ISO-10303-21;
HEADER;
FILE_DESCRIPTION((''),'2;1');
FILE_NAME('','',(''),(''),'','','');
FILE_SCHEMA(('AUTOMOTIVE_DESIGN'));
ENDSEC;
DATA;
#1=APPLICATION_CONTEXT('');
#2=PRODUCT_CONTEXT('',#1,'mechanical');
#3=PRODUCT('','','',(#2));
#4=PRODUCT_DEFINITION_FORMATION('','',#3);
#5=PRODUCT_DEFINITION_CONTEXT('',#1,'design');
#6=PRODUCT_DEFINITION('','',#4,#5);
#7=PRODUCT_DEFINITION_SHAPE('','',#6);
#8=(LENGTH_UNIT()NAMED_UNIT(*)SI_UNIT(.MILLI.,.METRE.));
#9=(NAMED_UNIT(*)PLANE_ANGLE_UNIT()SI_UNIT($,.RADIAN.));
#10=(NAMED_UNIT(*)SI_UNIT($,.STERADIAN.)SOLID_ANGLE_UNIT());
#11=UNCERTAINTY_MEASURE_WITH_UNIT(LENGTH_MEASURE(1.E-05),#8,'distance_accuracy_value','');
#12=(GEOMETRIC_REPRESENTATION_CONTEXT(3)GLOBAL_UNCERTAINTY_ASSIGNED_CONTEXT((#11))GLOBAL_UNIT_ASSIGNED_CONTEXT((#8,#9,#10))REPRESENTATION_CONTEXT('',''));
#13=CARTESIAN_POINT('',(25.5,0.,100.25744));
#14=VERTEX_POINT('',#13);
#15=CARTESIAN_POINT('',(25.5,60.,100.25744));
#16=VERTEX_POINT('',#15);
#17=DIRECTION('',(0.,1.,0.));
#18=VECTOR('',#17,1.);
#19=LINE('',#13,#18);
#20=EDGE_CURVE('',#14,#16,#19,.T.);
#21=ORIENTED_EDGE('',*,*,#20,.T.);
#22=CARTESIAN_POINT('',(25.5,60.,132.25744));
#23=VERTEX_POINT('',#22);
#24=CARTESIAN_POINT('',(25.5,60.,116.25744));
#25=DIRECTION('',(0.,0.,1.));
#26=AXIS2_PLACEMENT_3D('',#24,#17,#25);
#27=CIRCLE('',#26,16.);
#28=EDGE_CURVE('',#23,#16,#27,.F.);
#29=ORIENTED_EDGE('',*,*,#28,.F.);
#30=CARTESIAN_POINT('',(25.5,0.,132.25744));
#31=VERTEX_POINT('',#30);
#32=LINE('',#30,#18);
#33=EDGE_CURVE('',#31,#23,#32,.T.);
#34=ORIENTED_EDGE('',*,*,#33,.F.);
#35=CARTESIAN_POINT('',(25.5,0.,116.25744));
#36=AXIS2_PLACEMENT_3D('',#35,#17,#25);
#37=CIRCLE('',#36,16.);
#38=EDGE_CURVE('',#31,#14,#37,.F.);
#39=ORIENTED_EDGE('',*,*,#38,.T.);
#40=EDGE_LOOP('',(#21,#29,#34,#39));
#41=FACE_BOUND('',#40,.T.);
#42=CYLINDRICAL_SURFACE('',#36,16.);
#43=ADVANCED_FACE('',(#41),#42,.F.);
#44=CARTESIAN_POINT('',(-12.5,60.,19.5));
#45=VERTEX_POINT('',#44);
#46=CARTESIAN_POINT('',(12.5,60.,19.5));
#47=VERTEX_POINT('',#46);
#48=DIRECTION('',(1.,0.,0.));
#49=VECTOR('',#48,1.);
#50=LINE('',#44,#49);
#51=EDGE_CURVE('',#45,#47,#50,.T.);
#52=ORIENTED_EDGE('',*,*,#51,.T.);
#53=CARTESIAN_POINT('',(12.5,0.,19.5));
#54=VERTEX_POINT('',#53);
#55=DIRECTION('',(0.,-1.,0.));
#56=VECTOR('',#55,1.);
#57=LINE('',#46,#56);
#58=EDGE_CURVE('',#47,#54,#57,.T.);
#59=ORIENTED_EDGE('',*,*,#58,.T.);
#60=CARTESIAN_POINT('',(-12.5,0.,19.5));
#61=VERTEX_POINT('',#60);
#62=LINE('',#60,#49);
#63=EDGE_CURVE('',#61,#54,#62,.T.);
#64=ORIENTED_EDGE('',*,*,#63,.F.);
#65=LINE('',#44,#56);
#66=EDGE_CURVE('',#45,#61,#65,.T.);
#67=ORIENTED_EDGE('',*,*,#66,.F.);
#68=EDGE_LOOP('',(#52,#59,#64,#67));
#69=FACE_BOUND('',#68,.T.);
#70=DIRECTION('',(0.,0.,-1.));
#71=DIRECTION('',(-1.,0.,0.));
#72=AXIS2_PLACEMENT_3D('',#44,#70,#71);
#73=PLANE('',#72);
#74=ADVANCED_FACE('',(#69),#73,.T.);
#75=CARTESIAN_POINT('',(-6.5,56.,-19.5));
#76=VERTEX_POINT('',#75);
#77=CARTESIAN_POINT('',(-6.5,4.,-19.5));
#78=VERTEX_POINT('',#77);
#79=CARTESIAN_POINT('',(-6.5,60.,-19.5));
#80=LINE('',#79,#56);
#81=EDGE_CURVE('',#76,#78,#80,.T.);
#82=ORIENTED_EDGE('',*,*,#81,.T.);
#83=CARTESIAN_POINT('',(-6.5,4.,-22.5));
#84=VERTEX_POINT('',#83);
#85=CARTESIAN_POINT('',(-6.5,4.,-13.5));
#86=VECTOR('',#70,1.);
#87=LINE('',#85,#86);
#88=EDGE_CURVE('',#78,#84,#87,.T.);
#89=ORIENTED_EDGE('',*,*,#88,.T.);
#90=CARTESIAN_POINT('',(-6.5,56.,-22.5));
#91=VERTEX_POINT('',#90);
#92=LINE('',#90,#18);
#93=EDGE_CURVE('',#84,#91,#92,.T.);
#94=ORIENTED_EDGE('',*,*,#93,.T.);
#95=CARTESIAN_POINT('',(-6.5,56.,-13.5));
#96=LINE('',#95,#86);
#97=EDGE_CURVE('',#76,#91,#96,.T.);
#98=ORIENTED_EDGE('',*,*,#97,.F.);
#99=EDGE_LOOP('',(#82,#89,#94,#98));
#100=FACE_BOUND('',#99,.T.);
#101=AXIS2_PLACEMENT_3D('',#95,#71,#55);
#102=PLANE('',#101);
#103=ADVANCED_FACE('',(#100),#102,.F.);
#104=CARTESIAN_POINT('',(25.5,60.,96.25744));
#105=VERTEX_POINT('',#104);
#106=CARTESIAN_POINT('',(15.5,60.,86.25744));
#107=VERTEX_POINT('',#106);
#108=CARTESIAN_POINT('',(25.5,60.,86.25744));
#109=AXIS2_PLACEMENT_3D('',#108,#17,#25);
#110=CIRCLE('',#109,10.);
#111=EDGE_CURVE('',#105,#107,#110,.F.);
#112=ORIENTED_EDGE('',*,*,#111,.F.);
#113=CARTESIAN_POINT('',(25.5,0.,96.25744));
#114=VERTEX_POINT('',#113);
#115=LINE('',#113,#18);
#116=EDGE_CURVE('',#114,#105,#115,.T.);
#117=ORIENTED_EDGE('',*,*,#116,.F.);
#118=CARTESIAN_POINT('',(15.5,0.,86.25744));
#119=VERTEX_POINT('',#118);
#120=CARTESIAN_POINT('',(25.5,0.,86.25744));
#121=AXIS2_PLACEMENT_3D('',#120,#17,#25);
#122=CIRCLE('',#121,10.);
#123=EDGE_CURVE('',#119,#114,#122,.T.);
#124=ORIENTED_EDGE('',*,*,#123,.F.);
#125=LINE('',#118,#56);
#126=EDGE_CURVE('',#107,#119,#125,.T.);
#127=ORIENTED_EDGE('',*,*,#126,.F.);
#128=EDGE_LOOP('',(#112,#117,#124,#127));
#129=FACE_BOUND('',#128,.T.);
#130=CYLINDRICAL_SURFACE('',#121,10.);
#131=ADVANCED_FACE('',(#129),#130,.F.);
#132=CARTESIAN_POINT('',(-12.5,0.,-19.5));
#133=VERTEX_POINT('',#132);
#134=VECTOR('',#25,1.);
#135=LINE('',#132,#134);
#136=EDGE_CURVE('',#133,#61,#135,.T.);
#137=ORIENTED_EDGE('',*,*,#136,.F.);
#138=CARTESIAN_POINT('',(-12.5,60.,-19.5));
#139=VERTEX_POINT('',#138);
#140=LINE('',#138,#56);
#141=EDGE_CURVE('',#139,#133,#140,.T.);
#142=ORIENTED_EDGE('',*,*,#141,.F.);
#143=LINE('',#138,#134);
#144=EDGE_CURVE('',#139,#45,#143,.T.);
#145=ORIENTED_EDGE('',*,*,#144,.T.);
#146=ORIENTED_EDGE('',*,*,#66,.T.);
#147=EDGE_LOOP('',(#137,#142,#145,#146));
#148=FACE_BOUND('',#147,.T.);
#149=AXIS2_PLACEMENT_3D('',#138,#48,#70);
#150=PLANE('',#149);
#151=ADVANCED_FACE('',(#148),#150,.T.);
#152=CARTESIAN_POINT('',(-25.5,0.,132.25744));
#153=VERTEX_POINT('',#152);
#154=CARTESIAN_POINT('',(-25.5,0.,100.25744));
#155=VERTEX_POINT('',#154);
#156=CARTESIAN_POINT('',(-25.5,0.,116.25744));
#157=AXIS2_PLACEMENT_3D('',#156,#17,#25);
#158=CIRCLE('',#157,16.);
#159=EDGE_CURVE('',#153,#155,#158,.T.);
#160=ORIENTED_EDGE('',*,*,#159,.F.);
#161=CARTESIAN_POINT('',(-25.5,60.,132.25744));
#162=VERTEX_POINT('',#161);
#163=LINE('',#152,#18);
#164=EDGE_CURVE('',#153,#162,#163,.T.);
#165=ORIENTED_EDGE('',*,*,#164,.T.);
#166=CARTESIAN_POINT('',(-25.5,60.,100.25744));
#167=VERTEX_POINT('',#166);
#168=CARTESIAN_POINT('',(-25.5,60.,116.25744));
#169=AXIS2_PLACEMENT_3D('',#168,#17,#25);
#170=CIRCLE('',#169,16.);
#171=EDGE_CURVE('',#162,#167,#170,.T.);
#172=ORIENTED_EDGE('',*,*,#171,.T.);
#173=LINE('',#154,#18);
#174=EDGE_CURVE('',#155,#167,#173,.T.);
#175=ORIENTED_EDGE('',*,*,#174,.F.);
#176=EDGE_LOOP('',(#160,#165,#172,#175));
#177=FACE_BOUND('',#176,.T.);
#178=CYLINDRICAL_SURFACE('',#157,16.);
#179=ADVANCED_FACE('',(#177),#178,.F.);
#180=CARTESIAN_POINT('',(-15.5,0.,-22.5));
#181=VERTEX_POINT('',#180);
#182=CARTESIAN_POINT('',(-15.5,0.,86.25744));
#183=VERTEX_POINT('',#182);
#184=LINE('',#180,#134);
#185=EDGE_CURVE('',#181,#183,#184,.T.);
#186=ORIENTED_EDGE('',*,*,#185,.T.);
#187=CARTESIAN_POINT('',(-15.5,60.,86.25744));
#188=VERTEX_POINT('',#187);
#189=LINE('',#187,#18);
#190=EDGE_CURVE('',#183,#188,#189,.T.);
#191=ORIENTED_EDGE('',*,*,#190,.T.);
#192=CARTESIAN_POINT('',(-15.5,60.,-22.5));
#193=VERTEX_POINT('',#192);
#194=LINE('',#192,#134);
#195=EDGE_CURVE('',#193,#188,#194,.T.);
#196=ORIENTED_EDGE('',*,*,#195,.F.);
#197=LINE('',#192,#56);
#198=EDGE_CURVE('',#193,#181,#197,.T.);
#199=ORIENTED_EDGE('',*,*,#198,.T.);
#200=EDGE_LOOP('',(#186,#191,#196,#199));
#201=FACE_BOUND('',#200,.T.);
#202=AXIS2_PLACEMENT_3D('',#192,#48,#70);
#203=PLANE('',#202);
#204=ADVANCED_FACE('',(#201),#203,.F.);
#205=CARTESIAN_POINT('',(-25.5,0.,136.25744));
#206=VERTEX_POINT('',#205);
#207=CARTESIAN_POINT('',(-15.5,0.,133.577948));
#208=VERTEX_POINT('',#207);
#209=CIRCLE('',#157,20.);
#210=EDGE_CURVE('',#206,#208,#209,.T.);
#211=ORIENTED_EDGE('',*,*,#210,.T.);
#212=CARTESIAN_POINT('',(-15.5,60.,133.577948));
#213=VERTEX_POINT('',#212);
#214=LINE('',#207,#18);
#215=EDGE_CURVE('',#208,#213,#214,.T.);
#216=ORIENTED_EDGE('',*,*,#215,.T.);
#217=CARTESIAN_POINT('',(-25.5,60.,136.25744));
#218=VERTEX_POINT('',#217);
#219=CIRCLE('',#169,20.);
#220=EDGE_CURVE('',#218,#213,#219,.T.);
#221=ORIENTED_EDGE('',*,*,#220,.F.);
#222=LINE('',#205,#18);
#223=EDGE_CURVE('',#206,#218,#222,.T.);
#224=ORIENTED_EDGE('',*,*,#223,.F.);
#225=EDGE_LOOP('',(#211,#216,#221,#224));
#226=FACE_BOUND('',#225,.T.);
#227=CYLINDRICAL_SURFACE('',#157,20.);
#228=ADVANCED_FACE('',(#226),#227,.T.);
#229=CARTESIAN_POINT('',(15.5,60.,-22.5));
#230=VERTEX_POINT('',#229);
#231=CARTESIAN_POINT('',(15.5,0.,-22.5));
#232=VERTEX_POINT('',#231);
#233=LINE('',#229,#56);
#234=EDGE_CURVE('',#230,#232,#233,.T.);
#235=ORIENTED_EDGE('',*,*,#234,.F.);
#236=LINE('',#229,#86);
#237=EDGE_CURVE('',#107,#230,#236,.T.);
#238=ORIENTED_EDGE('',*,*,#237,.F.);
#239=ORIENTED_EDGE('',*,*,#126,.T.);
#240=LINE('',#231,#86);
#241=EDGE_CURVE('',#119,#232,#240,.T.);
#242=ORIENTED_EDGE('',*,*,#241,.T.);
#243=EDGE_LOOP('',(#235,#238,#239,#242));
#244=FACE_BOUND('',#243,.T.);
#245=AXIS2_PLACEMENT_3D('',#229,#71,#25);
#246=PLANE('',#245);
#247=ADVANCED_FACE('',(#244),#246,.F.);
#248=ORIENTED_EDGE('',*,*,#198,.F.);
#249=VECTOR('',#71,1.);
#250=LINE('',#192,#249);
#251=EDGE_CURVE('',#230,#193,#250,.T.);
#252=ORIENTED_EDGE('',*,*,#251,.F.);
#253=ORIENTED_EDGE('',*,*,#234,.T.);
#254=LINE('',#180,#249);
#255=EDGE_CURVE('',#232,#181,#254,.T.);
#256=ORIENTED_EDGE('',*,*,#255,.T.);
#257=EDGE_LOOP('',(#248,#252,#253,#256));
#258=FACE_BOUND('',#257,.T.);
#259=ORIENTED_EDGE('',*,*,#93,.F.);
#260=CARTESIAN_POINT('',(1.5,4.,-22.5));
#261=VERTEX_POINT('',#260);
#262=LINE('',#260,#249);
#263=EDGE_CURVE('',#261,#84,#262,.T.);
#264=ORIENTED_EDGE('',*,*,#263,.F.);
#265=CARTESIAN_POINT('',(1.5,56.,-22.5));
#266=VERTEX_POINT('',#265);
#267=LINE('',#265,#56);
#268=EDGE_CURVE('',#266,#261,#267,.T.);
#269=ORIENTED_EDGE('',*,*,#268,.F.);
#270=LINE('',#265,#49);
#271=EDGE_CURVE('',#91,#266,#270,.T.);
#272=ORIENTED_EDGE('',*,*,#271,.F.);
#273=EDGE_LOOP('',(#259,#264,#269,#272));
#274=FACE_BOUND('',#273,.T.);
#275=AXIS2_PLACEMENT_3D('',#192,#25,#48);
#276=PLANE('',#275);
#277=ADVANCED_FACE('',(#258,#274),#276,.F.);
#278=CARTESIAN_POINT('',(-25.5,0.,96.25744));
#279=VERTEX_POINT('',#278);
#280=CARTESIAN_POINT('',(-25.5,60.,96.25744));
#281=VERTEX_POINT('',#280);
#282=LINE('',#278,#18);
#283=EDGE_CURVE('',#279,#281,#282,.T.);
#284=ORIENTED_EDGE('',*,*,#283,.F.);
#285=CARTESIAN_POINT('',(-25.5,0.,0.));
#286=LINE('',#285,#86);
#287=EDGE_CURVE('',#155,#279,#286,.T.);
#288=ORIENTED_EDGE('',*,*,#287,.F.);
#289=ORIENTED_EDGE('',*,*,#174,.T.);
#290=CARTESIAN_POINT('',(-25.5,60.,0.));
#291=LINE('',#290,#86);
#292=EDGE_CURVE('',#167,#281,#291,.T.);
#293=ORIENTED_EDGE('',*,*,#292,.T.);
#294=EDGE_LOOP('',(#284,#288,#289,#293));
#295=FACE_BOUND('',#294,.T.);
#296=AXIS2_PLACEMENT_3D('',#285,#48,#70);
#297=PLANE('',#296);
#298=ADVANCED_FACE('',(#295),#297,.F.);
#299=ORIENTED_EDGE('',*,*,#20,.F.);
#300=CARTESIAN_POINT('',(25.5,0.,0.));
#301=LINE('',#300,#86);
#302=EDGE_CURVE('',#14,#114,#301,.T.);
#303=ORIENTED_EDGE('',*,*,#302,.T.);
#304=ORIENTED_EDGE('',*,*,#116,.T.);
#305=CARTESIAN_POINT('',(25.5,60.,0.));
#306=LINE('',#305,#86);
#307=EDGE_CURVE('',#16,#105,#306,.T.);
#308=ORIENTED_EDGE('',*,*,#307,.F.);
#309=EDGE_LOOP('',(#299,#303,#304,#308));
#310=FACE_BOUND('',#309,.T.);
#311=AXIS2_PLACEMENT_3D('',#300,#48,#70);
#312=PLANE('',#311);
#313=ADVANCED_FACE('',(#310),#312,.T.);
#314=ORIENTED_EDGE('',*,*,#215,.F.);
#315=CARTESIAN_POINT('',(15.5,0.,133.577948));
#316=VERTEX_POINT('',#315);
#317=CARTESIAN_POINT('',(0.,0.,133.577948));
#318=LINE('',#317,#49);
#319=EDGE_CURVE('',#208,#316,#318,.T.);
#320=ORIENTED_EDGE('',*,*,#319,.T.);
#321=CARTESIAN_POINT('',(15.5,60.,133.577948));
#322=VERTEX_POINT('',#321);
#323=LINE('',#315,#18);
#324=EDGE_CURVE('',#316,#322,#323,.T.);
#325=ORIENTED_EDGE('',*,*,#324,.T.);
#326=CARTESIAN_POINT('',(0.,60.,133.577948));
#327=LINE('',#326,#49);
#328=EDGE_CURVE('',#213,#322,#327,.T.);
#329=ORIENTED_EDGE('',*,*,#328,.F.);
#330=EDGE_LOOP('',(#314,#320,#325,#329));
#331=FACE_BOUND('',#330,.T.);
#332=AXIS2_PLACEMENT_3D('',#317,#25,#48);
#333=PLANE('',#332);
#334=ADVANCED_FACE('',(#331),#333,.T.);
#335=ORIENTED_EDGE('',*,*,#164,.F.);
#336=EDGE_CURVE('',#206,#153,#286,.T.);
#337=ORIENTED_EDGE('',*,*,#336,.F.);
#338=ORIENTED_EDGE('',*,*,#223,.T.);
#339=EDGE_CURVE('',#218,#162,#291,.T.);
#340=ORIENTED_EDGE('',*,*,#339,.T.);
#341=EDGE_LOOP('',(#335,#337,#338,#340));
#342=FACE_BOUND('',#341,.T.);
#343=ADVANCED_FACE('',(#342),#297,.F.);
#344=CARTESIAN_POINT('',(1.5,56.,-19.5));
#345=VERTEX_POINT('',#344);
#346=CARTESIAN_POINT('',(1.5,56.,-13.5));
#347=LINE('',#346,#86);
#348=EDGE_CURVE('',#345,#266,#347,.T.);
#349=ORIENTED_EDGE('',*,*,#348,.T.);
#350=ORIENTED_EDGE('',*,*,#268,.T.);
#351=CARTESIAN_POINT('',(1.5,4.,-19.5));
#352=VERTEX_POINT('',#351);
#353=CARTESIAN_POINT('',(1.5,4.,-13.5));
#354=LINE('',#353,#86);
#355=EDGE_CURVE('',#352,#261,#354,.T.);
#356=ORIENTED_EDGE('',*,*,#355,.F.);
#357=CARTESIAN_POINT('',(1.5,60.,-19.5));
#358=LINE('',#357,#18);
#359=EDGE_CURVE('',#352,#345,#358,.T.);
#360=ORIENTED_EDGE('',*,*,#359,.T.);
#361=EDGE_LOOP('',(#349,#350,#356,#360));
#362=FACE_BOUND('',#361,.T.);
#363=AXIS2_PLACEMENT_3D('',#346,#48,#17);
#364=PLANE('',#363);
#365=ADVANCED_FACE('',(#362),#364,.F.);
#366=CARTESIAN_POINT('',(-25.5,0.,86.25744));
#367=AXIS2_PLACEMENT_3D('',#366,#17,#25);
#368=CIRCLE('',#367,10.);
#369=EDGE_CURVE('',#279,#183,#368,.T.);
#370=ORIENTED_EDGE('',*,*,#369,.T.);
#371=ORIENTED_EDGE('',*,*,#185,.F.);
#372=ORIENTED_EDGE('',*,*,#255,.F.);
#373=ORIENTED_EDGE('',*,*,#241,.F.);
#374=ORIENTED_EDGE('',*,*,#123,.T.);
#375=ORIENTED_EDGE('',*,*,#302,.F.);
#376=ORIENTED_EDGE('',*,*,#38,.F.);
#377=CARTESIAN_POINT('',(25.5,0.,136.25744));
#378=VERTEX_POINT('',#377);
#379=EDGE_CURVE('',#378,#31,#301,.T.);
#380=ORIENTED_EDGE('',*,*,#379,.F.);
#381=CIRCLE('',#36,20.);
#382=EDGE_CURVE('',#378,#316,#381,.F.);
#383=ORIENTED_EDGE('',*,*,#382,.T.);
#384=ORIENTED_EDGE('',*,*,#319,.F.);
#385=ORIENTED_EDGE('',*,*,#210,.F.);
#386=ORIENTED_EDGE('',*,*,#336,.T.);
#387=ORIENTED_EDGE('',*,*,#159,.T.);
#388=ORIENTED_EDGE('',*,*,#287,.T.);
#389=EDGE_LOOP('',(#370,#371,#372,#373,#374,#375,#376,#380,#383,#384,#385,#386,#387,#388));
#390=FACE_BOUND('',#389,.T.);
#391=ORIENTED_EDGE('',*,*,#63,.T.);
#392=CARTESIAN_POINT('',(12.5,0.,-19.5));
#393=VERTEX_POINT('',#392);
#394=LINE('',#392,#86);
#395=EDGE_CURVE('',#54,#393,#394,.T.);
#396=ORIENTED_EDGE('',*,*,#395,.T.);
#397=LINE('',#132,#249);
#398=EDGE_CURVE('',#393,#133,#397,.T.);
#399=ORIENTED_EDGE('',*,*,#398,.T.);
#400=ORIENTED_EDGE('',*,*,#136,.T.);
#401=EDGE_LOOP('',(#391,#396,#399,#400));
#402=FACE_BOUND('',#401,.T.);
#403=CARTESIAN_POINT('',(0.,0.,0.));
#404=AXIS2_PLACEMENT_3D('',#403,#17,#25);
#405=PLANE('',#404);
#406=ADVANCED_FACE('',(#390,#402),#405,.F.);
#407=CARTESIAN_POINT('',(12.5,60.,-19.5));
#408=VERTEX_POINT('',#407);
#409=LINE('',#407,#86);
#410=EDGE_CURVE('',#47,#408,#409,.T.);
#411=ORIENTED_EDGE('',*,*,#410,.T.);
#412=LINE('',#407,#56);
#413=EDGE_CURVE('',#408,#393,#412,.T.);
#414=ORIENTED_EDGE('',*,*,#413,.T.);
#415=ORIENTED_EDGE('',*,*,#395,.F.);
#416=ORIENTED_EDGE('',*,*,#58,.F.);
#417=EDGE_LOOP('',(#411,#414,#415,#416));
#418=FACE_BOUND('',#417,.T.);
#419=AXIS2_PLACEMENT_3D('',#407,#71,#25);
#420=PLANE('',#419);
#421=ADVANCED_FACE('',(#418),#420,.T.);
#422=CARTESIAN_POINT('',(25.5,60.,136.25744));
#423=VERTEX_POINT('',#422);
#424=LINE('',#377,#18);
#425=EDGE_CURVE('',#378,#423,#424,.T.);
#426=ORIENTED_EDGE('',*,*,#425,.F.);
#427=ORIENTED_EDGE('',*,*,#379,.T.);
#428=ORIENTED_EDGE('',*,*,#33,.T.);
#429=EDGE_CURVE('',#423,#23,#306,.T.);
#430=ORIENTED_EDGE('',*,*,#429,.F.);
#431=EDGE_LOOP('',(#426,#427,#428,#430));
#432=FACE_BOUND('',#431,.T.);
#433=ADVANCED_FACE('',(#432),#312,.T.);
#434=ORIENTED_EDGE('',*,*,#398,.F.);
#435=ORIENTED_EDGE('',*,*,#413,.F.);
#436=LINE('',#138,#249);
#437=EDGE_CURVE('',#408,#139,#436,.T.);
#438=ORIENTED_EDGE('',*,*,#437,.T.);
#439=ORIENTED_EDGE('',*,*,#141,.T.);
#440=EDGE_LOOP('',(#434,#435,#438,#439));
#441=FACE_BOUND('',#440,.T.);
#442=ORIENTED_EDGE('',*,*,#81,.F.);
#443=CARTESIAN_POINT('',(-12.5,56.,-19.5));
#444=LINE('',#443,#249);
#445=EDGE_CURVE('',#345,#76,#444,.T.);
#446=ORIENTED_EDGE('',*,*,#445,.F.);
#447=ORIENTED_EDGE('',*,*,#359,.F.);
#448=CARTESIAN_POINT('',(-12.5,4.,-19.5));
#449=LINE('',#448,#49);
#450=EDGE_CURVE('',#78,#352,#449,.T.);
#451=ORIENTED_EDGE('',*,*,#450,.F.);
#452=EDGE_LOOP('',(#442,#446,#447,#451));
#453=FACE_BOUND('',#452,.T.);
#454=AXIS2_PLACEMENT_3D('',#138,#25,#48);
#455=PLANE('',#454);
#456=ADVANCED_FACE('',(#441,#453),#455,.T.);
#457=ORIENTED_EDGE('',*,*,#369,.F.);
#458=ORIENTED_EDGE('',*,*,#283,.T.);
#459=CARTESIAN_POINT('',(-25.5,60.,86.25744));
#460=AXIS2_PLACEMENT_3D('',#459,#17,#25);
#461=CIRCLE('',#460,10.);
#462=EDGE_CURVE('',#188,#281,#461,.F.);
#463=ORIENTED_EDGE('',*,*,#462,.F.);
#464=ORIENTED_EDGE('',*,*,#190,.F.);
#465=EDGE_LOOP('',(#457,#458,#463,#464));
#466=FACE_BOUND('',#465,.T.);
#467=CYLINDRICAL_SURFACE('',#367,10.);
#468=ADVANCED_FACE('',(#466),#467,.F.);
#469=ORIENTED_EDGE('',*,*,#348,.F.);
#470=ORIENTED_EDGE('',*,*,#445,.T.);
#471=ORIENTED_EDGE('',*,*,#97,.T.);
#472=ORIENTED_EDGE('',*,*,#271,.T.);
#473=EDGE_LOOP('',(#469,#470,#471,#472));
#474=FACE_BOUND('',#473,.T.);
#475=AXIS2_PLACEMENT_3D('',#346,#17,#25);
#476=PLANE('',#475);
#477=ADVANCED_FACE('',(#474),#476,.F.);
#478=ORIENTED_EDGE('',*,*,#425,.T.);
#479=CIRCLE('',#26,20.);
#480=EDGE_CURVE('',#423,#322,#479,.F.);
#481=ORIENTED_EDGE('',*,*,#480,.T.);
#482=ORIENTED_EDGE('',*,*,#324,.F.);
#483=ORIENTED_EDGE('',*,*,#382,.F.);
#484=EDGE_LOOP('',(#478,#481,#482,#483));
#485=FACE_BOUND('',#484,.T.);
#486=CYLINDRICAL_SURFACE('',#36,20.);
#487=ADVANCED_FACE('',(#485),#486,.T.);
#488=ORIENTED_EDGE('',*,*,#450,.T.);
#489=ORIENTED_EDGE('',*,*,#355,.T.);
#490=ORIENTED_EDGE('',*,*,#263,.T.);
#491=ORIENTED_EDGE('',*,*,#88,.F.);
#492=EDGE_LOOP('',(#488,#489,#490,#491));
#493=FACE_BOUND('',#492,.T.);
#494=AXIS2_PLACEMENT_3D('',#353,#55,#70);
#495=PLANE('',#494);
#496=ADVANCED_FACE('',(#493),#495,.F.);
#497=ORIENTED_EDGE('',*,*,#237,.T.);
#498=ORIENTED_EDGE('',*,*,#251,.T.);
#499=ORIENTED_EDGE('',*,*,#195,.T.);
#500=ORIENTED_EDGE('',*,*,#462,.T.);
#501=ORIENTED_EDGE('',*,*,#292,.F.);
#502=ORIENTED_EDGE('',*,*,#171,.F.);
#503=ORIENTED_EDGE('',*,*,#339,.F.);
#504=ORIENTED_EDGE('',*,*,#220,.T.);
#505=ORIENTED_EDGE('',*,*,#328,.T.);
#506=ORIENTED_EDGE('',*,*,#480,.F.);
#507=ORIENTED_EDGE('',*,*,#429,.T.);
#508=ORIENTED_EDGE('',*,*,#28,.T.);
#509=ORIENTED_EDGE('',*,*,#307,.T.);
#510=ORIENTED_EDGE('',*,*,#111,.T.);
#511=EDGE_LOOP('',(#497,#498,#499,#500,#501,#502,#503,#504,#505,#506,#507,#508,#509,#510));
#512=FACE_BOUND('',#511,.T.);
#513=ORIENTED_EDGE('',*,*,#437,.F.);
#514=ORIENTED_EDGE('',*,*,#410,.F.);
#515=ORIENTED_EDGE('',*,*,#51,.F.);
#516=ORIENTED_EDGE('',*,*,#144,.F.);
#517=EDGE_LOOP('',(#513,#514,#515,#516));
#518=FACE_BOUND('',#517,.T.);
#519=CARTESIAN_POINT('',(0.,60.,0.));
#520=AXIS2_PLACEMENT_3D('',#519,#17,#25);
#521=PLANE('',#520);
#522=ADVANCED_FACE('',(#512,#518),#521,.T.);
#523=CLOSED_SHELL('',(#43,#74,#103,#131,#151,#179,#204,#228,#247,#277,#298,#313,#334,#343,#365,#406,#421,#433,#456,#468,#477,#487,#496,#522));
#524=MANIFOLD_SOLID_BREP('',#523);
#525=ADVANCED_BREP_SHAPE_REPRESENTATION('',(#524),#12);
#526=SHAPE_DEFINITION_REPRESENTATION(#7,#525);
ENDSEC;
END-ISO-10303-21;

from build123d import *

# Parameters (mm, degrees)
SKETCH1_W           = 31
SKETCH1_H           = 45
SKETCH1_W_2         = 25
SKETCH1_H_2         = 39
BOSS_EXTRUDE1_DEPTH = 60
BOSS_EXTRUDE3_DEPTH = 60
SKETCH3_W           = 8
SKETCH3_H           = 52
CUT_EXTRUDE1_DEPTH  = 9
FILLET1_R           = 10


with BuildPart() as part:
    # Sketch1 → Boss-Extrude1 (new body)
    with BuildSketch(Plane(origin=(0, 0, 0), x_dir=(1, 0, 0), z_dir=(0, 1, 0))):
        Rectangle(SKETCH1_W, SKETCH1_H)
        Rectangle(SKETCH1_W_2, SKETCH1_H_2, mode=Mode.SUBTRACT)
    extrude(amount=BOSS_EXTRUDE1_DEPTH)

    # Sketch5 → Boss-Extrude3 (add)
    with BuildSketch(Plane(origin=(0, 60, 0), x_dir=(1, 0, 0), z_dir=(0, 1, 0))):
        with BuildLine():
            ThreePointArc((-25.5, -136.257439501), (-20.323619098, -135.575956026), (-15.5, -133.577947576))
            Line((-15.5, -133.577947576), (15.5, -133.577947576))
            ThreePointArc((15.5, -133.577947576), (20.323619098, -135.575956026), (25.5, -136.257439501))
            Line((25.5, -136.257439501), (25.5, -132.257439501))
            ThreePointArc((25.5, -132.257439501), (9.5, -116.257439501), (25.5, -100.257439501))
            Line((25.5, -100.257439501), (25.5, -96.257439501))
            ThreePointArc((25.5, -96.257439501), (20.323619098, -96.938922975), (15.5, -98.936931425))
            Line((15.5, -98.936931425), (15.5, -22.5))
            Line((15.5, -22.5), (-15.5, -22.5))
            Line((-15.5, -22.5), (-15.5, -98.936931425))
            ThreePointArc((-15.5, -98.936931425), (-20.323619098, -96.938922975), (-25.5, -96.257439501))
            Line((-25.5, -96.257439501), (-25.5, -100.257439501))
            ThreePointArc((-25.5, -100.257439501), (-9.5, -116.257439501), (-25.5, -132.257439501))
            Line((-25.5, -132.257439501), (-25.5, -136.257439501))
        make_face()
    extrude(amount=-BOSS_EXTRUDE3_DEPTH)

    # Sketch3 → Cut-Extrude1 (cut)
    with BuildSketch(Plane(origin=(0, 0, -22.5), x_dir=(-1, 0, 0), z_dir=(0, 0, -1))):
        with Locations((2.5, 30)):
            Rectangle(SKETCH3_W, SKETCH3_H)
    extrude(amount=-CUT_EXTRUDE1_DEPTH, mode=Mode.SUBTRACT)

    # Fillet1
    fillet1_edges = [part.edges().sort_by_distance(p)[0] for p in [
        (-15.5, 30, 98.936931425),
        (15.5, 30, 98.936931425),
    ]]
    fillet(fillet1_edges, radius=FILLET1_R - 0.0001)  # a hair under: the kernel refuses the full size


solid = part.part
